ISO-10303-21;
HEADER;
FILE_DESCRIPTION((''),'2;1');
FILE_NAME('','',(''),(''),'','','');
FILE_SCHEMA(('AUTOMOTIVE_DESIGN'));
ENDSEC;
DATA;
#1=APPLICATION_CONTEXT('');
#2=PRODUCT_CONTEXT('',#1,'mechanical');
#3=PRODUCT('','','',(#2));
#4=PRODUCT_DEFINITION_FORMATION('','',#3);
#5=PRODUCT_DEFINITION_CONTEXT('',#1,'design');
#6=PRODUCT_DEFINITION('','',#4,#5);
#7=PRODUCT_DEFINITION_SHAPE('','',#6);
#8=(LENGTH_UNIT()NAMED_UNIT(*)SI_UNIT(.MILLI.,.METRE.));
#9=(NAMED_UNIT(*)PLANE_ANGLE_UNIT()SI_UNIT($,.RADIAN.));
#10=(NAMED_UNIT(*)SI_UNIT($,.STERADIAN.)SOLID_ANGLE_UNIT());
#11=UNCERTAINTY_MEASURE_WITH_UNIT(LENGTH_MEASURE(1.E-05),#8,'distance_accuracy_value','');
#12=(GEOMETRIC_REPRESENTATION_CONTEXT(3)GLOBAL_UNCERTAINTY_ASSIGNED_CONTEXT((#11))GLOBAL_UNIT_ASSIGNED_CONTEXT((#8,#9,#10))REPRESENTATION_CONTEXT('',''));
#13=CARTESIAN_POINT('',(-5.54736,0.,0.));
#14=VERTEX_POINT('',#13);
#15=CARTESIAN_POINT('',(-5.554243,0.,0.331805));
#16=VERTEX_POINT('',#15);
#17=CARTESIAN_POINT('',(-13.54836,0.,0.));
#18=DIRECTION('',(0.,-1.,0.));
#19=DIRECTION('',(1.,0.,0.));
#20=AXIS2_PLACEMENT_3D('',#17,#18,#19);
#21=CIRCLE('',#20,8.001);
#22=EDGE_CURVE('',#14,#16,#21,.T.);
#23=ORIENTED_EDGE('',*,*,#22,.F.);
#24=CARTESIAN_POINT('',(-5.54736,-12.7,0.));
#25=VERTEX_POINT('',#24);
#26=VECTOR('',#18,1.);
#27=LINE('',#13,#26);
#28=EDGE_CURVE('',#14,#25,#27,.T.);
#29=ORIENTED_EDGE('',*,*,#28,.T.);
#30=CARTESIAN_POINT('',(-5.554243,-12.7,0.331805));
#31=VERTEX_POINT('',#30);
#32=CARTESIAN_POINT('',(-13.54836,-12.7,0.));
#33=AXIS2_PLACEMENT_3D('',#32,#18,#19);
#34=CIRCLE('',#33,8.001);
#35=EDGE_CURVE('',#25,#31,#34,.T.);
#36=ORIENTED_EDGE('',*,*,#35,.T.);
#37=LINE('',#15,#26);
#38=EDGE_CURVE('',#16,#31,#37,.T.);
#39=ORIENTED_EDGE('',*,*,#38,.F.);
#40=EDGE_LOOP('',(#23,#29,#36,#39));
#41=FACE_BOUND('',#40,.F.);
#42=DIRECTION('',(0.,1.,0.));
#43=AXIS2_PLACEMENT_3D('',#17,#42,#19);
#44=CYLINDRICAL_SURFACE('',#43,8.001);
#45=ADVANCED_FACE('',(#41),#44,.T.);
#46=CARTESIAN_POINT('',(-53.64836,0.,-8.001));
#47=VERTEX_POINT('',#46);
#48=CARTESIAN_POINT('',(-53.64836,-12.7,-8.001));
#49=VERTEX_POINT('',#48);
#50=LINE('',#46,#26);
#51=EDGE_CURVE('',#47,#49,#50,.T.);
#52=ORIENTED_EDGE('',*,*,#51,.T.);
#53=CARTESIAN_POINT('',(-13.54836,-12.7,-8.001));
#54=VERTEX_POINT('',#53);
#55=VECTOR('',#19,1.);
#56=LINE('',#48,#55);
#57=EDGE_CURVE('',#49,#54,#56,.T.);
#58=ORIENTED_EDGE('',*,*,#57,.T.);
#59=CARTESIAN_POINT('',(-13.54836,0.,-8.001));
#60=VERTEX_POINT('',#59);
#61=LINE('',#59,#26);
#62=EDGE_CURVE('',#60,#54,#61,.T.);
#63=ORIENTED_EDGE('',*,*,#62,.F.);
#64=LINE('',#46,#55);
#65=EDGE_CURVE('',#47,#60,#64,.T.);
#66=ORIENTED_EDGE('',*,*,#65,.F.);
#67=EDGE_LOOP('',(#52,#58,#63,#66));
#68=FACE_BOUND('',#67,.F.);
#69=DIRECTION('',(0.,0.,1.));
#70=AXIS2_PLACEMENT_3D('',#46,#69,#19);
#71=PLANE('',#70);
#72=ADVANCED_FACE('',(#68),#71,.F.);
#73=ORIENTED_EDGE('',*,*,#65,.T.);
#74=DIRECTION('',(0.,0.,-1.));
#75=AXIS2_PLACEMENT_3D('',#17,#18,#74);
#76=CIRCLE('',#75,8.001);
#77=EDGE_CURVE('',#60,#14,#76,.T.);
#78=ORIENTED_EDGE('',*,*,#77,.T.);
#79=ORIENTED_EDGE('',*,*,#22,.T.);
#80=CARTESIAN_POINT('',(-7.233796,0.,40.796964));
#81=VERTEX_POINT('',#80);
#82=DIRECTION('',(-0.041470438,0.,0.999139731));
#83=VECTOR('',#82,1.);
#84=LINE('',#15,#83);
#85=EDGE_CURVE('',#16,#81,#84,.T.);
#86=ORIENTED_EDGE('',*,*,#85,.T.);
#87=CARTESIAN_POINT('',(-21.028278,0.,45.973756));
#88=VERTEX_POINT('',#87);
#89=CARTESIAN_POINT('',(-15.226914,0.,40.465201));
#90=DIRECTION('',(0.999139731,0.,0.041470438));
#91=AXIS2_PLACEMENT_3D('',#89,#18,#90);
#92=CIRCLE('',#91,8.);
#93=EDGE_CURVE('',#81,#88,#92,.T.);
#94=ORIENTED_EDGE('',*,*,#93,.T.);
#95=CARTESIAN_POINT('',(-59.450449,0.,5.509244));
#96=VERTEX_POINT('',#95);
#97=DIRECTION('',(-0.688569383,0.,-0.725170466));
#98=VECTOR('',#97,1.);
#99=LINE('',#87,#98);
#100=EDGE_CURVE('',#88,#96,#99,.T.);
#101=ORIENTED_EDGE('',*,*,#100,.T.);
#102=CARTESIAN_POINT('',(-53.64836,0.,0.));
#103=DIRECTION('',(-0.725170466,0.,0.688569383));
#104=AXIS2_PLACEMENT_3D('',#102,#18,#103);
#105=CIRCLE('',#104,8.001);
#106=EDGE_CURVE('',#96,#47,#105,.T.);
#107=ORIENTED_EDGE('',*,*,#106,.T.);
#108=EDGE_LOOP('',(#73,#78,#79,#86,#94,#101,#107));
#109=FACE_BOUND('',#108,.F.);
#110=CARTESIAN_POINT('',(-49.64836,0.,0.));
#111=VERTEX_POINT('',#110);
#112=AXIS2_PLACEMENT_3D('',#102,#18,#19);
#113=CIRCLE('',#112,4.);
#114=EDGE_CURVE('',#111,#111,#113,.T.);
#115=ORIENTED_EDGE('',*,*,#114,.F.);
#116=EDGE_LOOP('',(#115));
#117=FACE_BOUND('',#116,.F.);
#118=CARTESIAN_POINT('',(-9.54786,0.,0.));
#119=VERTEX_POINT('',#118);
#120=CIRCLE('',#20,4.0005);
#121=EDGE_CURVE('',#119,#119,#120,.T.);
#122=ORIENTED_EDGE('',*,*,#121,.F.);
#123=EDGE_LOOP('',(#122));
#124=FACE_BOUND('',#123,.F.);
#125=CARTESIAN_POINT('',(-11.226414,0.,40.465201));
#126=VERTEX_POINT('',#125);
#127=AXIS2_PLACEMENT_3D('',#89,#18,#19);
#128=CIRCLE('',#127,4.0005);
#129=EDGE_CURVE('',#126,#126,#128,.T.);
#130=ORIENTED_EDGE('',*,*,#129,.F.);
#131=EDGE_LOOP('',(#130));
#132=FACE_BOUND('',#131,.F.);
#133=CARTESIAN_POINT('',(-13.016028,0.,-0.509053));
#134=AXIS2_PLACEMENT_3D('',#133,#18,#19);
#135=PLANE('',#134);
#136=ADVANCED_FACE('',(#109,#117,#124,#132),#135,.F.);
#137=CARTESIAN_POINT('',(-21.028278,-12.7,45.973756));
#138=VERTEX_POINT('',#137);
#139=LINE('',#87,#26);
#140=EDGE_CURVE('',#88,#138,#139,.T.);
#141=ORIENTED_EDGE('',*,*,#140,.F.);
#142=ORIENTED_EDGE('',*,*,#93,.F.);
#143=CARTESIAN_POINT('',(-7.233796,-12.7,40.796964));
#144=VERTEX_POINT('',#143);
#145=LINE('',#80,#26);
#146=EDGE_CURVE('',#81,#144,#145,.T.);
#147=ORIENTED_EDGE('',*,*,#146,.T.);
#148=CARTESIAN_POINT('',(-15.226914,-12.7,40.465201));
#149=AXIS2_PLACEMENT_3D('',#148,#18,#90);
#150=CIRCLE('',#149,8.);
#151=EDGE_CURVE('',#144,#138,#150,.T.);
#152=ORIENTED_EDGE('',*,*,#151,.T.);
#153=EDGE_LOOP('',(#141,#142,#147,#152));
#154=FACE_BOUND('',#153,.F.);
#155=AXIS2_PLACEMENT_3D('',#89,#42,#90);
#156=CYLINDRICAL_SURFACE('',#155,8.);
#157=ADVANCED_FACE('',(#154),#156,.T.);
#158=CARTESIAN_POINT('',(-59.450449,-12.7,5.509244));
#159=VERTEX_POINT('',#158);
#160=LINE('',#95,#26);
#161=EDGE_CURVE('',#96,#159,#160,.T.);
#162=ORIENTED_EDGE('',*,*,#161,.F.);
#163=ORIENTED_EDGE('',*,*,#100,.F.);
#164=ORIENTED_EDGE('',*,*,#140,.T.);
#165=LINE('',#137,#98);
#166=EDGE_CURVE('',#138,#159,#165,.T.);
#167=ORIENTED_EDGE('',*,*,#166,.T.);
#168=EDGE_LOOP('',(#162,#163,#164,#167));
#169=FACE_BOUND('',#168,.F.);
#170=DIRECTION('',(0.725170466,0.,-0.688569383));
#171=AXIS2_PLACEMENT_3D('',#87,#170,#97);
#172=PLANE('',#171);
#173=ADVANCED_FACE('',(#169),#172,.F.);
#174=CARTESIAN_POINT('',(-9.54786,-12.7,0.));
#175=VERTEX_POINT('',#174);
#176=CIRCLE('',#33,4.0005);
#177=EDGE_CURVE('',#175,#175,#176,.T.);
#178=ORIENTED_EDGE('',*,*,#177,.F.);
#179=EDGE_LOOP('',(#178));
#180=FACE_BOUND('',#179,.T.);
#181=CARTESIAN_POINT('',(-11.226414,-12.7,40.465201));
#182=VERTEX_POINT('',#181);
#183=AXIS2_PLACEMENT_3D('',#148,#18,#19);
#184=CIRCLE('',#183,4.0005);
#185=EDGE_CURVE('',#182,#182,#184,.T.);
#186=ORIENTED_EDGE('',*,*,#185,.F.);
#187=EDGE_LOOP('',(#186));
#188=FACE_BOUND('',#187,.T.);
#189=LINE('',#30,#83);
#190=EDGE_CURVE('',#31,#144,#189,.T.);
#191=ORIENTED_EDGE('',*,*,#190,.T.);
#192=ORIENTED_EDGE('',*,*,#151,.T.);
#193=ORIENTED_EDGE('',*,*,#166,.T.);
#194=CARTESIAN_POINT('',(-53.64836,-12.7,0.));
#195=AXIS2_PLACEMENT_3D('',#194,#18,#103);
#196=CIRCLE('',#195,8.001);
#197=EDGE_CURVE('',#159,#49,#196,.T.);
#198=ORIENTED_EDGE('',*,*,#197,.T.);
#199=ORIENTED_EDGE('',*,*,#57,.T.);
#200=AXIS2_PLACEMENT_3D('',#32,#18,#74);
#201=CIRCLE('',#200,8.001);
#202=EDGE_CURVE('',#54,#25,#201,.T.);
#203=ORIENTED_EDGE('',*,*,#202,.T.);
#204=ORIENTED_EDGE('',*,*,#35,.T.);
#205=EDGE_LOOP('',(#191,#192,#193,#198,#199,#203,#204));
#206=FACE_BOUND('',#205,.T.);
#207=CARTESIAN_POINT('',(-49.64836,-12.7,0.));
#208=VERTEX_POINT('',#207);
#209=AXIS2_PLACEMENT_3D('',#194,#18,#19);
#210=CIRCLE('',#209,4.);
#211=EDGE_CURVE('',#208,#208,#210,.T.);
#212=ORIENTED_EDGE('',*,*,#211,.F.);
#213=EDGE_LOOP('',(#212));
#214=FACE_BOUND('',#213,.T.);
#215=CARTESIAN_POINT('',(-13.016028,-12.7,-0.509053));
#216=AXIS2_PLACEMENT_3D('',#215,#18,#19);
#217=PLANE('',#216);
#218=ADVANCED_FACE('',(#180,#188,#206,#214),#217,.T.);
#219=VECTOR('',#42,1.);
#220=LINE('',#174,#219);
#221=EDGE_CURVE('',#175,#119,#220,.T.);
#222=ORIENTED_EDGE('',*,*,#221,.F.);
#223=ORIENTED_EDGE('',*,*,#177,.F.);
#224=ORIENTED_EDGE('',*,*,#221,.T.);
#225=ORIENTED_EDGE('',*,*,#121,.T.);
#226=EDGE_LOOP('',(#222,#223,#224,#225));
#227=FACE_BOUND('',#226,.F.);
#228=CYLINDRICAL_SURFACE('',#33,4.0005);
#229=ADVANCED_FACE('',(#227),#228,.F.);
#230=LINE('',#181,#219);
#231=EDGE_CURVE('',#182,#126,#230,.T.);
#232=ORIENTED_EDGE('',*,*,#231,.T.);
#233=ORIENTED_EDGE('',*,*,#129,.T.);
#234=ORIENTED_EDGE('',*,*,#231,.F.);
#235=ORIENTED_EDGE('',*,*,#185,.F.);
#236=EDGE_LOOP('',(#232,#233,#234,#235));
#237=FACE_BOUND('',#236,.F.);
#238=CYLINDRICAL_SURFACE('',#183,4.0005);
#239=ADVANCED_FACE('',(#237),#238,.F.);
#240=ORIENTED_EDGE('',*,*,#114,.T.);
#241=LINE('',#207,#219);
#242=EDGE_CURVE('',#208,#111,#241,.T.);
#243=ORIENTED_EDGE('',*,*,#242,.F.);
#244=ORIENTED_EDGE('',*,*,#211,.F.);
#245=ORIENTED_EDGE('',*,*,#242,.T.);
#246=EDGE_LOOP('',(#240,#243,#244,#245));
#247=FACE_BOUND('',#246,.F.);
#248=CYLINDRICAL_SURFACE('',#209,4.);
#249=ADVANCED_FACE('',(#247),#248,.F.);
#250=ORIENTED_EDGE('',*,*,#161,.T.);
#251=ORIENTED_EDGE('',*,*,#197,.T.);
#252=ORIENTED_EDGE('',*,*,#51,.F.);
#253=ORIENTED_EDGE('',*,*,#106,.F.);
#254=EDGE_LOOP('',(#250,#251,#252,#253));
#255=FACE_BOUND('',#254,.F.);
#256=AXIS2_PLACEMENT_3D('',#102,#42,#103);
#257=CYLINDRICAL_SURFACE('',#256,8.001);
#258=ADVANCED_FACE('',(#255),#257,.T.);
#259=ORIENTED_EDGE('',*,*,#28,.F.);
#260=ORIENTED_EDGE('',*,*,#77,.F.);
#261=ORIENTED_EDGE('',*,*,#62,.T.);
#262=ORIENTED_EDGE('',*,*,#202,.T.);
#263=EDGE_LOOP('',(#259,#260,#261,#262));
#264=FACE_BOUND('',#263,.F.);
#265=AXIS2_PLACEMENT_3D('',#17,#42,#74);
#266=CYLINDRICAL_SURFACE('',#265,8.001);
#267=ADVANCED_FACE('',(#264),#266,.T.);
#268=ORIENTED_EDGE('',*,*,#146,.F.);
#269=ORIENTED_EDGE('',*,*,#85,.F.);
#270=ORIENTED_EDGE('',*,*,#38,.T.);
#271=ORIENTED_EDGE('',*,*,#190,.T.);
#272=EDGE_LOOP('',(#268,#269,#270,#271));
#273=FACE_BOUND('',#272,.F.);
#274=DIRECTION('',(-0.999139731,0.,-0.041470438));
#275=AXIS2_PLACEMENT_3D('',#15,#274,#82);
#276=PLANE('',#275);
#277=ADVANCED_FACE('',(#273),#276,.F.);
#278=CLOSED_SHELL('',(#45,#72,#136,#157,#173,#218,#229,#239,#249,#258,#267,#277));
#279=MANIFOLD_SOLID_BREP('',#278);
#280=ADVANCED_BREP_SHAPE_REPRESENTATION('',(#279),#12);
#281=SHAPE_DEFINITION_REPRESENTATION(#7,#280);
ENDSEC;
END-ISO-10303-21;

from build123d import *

# Parameters (mm, degrees)
F1_DEPTH = 12.7
F2_R     = 4.0005
F2_R_2   = 4
F3_DEPTH = 12.7


with BuildPart() as f1:
    # F0 (on Front) → F1 (new body)
    with BuildSketch(Plane.XZ):
        with BuildLine():
            Line((-13.8799677983, 7.9941251807), (-13.5483602062, 0))
            Line((-13.5483602062, 0), (-21.5493602062, 0))
            ThreePointArc((-21.5493602062, 0), (-19.2059215625, -5.6575613563), (-13.5483602062, -8.001))
            ThreePointArc((-13.5483602062, -8.001), (-7.8907988499, -5.6575613563), (-5.5473602062, 0))
            ThreePointArc((-5.5473602062, 0), (-5.5490811437, 0.1659381806), (-5.5542432158, 0.3318049778))
            ThreePointArc((-5.5542432158, 0.3318049778), (-8.13021474, 5.8872489932), (-13.8799677983, 7.9941251807))
        make_face()
        with BuildLine():
            Line((-14.8953476758, 32.4720745373), (-13.8799677983, 7.9941251807))
            ThreePointArc((-13.8799677983, 7.9941251807), (-8.13021474, 5.8872489932), (-5.5542432158, 0.3318049778))
            Line((-5.5542432158, 0.3318049778), (-7.2337959714, 40.7969640847))
            ThreePointArc((-7.2337959714, 40.7969640847), (-7.2286345445, 40.6311180182), (-7.2269138221, 40.4652005773))
            ThreePointArc((-7.2269138221, 40.4652005773), (-9.4540233342, 34.9268131392), (-14.8953476758, 32.4720745373))
        make_face()
        with BuildLine():
            Line((-15.2269138221, 40.4652005773), (-14.8953476758, 32.4720745373))
            ThreePointArc((-14.8953476758, 32.4720745373), (-9.4540233342, 34.9268131392), (-7.2269138221, 40.4652005773))
            ThreePointArc((-7.2269138221, 40.4652005773), (-7.2286345445, 40.6311180182), (-7.2337959714, 40.7969640847))
            ThreePointArc((-7.2337959714, 40.7969640847), (-12.4160884571, 47.9551445535), (-21.0282775518, 45.9737556397))
            ThreePointArc((-21.0282775518, 45.9737556397), (-23.2242322391, 40.2580819225), (-20.7353649166, 34.6637381289))
            Line((-20.7353649166, 34.6637381289), (-15.2269138221, 40.4652005773))
        make_face()
        with BuildLine():
            Line((-48.1392205553, 5.8021876312), (-20.7353649166, 34.6637381289))
            ThreePointArc((-20.7353649166, 34.6637381289), (-23.2242322391, 40.2580819225), (-21.0282775518, 45.9737556397))
            Line((-21.0282775518, 45.9737556397), (-59.4504491063, 5.5092436318))
            ThreePointArc((-59.4504491063, 5.5092436318), (-53.8555047508, 7.9983180818), (-48.1392205553, 5.8021876312))
        make_face()
        with BuildLine():
            ThreePointArc((-53.6483602062, -8.001), (-47.9907988499, -5.6575613563), (-45.6473602062, 0))
            Line((-45.6473602062, 0), (-53.6483602062, 0))
            Line((-53.6483602062, 0), (-48.1392205553, 5.8021876312))
            ThreePointArc((-48.1392205553, 5.8021876312), (-53.8555047508, 7.9983180818), (-59.4504491063, 5.5092436318))
            ThreePointArc((-59.4504491063, 5.5092436318), (-61.0000763085, -3.1572569346), (-53.6483602062, -8.001))
        make_face()
        with BuildLine():
            ThreePointArc((-13.5483602062, -8.001), (-19.2059215625, -5.6575613563), (-21.5493602062, 0))
            Line((-21.5493602062, 0), (-45.6473602062, 0))
            ThreePointArc((-45.6473602062, 0), (-47.9907988499, -5.6575613563), (-53.6483602062, -8.001))
            Line((-53.6483602062, -8.001), (-13.5483602062, -8.001))
        make_face()
        with BuildLine():
            ThreePointArc((-21.5493602062, 0), (-19.3219723054, 5.5390797365), (-13.8799677983, 7.9941251807))
            Line((-13.8799677983, 7.9941251807), (-14.8953476758, 32.4720745373))
            ThreePointArc((-14.8953476758, 32.4720745373), (-18.0377645415, 32.975266116), (-20.7353649166, 34.6637381289))
            Line((-20.7353649166, 34.6637381289), (-48.1392205553, 5.8021876312))
            ThreePointArc((-48.1392205553, 5.8021876312), (-46.296672395, 3.15732281), (-45.6473602062, 0))
            Line((-45.6473602062, 0), (-21.5493602062, 0))
        make_face()
        with BuildLine():
            ThreePointArc((-20.7353649166, 34.6637381289), (-18.0377645415, 32.975266116), (-14.8953476758, 32.4720745373))
            Line((-14.8953476758, 32.4720745373), (-15.2269138221, 40.4652005773))
            Line((-15.2269138221, 40.4652005773), (-20.7353649166, 34.6637381289))
        make_face()
        with BuildLine():
            Line((-21.5493602062, 0), (-13.5483602062, 0))
            Line((-13.5483602062, 0), (-13.8799677983, 7.9941251807))
            ThreePointArc((-13.8799677983, 7.9941251807), (-19.3219723054, 5.5390797365), (-21.5493602062, 0))
        make_face()
        with BuildLine():
            Line((-53.6483602062, 0), (-45.6473602062, 0))
            ThreePointArc((-45.6473602062, 0), (-46.296672395, 3.15732281), (-48.1392205553, 5.8021876312))
            Line((-48.1392205553, 5.8021876312), (-53.6483602062, 0))
        make_face()
    extrude(amount=F1_DEPTH)

    # F2 (on face) → F3 (cut, through all)
    with BuildSketch(Plane.XZ.offset(12.7)):
        with Locations((-15.2269138221, 40.4652005773)):
            Circle(F2_R)
        with Locations((-13.5483602062, 0)):
            Circle(F2_R)
        with Locations((-53.6483602062, 0)):
            Circle(F2_R_2)
    extrude(amount=-F3_DEPTH, mode=Mode.SUBTRACT)


solid = f1.part
